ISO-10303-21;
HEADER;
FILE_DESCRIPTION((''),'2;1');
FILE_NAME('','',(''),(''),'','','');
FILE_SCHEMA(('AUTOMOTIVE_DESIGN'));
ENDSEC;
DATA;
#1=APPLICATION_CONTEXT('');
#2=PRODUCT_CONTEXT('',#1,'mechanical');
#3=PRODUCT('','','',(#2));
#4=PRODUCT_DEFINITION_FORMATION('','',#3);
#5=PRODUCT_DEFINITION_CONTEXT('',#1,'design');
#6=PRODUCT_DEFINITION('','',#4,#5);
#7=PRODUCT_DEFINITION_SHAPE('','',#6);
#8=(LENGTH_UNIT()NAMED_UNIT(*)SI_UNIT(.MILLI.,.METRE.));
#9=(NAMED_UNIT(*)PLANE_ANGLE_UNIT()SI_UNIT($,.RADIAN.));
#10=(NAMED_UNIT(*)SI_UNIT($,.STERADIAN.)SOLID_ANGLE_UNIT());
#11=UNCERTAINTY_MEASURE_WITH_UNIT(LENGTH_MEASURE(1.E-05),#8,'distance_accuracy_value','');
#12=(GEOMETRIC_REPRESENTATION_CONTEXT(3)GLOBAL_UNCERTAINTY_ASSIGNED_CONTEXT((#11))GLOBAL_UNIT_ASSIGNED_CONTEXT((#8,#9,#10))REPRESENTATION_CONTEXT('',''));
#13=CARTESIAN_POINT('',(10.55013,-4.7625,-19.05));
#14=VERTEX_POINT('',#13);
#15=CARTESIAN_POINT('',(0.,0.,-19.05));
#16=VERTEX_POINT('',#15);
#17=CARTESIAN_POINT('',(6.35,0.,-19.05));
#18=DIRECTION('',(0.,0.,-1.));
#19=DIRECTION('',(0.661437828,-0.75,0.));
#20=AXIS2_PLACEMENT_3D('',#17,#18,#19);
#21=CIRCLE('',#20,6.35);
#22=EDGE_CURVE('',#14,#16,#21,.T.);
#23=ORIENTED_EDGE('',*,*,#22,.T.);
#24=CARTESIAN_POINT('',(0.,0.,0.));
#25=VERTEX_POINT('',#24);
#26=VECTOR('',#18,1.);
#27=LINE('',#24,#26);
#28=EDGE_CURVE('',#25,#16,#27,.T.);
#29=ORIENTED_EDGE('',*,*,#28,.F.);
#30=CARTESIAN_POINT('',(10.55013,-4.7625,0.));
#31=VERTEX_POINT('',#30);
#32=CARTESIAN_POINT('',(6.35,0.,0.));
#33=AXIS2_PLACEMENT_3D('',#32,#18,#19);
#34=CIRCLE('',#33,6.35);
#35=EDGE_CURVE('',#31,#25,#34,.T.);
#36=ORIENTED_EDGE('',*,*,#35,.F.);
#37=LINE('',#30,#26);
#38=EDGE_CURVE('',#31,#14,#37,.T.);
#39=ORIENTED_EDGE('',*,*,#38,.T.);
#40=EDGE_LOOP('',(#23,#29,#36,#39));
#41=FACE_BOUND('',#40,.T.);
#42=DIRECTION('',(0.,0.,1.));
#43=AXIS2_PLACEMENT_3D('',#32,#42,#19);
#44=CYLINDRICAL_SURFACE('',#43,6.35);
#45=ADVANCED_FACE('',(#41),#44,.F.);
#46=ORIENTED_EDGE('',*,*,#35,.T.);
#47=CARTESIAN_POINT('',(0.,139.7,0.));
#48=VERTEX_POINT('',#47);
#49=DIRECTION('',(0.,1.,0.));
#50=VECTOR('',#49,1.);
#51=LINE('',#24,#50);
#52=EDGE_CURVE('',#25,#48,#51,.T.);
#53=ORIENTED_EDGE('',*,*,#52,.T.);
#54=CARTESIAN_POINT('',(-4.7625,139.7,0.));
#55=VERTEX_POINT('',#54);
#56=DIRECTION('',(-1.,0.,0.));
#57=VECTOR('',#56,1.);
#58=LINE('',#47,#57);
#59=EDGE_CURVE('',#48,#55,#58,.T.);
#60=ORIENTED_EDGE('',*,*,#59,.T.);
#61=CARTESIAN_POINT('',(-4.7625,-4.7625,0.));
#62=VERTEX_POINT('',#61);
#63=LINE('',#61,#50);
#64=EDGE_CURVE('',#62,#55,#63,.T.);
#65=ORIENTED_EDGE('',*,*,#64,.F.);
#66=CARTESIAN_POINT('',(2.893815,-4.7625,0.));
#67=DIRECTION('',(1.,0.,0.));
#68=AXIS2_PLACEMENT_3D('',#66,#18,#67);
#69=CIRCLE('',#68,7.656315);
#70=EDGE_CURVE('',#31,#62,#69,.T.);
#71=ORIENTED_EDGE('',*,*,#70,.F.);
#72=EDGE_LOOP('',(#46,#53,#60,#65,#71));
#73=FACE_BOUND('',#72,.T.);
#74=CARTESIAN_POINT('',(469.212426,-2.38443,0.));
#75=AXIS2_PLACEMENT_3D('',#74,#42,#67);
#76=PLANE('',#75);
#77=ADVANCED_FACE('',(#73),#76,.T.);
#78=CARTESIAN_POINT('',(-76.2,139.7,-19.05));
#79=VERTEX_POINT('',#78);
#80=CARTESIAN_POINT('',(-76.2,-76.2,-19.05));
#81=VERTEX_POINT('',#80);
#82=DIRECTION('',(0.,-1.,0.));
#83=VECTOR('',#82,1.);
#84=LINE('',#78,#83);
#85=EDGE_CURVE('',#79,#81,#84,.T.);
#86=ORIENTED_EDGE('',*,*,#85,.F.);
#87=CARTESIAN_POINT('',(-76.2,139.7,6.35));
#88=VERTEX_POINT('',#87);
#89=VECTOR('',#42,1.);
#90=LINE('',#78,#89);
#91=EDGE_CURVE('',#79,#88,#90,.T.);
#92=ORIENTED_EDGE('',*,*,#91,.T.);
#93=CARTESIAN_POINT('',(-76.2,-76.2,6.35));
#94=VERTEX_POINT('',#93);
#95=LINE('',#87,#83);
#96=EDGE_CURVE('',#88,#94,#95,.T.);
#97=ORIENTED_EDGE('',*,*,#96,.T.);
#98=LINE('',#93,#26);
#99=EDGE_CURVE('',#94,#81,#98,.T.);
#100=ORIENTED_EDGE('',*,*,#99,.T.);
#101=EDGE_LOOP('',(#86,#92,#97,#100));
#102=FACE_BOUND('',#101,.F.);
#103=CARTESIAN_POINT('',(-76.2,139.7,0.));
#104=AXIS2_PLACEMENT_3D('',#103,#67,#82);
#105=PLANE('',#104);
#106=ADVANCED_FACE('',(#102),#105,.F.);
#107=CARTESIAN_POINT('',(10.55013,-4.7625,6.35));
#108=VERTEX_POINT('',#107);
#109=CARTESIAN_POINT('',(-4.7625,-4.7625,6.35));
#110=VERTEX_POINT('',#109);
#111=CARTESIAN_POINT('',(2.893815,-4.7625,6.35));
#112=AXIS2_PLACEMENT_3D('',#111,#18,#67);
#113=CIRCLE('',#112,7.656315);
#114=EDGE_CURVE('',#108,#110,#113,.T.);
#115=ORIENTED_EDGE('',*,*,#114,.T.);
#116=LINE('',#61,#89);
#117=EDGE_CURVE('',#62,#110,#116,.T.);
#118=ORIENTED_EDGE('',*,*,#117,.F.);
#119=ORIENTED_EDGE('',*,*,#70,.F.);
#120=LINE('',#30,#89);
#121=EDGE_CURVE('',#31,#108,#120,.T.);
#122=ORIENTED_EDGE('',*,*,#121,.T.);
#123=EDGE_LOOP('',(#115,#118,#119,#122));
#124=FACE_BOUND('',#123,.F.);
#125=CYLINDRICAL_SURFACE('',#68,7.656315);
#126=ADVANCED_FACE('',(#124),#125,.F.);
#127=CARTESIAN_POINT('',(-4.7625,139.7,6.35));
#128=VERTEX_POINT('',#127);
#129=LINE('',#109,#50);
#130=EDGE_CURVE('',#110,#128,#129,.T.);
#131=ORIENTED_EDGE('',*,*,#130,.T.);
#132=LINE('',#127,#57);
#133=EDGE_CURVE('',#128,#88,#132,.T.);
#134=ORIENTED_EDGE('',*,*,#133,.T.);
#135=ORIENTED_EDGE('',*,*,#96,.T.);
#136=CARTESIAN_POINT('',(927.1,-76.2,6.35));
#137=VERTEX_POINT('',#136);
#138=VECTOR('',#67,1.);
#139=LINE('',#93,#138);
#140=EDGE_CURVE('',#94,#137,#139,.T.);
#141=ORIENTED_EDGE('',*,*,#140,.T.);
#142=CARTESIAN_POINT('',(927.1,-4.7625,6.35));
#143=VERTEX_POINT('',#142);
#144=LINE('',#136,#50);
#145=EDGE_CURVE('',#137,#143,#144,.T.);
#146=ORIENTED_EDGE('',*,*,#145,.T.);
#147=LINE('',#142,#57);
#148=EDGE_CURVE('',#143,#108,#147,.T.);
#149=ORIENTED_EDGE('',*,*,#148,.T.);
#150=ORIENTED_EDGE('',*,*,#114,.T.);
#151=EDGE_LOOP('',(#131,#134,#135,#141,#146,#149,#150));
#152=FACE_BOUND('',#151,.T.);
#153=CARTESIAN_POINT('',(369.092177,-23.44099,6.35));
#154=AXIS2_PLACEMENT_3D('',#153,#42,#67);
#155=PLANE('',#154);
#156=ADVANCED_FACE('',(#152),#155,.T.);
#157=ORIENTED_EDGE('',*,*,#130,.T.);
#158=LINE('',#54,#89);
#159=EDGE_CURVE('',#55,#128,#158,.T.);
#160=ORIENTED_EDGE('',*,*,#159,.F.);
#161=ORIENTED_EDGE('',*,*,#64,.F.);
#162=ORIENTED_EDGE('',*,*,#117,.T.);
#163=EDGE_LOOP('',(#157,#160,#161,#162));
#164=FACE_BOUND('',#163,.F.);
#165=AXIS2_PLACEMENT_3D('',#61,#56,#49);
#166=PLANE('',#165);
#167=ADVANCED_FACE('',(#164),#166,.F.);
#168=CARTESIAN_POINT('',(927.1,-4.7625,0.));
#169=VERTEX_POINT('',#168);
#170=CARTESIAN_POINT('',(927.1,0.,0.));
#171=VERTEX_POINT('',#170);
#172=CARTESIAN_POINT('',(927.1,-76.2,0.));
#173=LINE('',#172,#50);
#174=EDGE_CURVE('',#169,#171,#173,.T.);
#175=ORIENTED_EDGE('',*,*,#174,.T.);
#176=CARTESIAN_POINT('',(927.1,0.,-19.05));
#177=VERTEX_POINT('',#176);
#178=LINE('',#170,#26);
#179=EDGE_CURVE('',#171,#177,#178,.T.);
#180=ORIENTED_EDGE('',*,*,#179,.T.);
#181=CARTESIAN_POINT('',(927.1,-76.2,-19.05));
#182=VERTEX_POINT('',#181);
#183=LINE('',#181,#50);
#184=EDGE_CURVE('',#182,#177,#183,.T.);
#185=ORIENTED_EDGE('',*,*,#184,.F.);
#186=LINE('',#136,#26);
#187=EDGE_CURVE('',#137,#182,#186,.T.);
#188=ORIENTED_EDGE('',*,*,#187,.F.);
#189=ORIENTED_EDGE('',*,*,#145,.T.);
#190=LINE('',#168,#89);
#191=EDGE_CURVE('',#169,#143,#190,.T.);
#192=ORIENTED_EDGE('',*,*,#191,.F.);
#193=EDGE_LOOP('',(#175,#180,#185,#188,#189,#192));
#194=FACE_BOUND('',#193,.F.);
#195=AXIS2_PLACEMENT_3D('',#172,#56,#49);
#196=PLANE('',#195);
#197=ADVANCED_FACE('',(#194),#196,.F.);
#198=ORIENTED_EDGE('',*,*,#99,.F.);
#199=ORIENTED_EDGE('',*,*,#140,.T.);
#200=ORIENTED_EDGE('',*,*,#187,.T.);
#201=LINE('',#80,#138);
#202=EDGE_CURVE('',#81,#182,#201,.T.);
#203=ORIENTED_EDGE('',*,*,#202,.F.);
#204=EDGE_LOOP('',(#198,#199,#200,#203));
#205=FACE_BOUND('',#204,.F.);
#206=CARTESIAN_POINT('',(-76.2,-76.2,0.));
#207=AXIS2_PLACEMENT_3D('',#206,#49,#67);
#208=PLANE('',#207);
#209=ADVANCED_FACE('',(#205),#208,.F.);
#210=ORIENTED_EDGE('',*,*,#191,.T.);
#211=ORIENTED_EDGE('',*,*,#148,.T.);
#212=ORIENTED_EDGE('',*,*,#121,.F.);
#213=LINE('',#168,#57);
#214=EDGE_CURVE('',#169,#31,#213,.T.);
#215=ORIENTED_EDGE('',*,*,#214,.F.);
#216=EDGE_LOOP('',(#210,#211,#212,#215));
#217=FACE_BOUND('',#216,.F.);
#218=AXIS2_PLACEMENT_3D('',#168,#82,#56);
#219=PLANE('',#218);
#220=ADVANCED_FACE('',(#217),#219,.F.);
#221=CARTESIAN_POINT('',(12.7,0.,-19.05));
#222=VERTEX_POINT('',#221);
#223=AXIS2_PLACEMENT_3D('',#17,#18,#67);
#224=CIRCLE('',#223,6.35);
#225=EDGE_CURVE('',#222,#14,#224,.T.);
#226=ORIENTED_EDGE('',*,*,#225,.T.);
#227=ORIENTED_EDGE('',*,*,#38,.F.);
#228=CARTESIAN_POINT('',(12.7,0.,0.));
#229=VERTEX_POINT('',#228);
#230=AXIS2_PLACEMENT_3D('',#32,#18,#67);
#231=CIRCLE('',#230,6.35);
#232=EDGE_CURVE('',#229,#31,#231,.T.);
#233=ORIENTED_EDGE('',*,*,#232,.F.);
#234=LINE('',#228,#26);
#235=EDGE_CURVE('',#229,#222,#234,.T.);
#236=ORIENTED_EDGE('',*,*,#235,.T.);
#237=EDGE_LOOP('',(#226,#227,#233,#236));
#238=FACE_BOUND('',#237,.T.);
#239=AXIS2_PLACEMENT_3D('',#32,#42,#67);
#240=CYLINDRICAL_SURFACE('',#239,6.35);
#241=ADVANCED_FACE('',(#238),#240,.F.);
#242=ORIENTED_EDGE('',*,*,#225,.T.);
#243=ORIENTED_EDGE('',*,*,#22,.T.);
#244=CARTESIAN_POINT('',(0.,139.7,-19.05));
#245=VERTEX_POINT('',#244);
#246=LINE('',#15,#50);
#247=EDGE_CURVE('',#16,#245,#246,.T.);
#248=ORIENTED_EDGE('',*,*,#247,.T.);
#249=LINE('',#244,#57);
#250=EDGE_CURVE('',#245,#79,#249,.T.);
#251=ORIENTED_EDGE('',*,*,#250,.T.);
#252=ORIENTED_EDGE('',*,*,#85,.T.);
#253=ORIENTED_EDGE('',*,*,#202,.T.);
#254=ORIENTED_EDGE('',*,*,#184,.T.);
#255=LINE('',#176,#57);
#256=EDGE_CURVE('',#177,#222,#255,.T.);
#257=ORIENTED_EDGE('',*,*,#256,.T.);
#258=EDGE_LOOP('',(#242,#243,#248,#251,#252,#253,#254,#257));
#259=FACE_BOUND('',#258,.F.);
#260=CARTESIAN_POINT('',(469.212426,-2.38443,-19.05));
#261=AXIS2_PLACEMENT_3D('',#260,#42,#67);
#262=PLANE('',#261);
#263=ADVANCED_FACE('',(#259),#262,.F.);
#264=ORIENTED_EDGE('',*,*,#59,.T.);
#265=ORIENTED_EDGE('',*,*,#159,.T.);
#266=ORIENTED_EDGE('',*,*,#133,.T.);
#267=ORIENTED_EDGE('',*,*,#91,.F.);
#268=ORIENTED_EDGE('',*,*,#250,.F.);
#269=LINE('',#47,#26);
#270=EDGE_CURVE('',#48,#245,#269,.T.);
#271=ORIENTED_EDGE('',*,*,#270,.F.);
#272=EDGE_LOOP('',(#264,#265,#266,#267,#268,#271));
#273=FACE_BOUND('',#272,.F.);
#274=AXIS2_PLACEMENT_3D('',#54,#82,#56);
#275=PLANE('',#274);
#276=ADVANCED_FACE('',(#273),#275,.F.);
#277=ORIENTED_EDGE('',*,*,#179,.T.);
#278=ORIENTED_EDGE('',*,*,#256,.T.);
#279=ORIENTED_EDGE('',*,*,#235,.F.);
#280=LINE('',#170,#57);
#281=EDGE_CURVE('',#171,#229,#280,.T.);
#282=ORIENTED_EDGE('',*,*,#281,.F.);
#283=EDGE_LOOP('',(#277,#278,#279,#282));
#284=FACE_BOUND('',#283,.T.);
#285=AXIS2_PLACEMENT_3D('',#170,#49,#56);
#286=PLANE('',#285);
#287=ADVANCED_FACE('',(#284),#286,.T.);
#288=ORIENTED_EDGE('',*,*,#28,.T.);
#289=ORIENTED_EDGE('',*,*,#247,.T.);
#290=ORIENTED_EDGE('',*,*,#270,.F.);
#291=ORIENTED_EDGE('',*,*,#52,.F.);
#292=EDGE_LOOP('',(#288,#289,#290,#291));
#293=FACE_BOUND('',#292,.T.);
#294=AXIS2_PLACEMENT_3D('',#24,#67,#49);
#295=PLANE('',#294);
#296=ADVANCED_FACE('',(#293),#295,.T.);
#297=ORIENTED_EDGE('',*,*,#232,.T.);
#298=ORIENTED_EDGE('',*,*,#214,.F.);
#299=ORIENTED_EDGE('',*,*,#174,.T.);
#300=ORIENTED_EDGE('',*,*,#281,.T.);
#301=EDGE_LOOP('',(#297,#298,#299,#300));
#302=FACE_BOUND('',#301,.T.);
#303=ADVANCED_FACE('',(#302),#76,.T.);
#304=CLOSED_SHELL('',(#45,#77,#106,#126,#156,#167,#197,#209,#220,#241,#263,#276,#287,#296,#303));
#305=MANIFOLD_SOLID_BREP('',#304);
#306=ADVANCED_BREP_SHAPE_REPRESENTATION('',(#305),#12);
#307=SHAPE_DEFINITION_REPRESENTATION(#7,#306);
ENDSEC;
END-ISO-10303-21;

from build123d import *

# Parameters (mm, degrees)
F1_DEPTH = 19.05
F2_DEPTH = 6.35


# Not quite as in the source:
# - a length typed as a fraction of an inch, garbled in the dataset ("3 / 203.2 mm" for 3/8 in), is restored


with BuildPart() as f1:
    # F0 (on Top) → F1 (new body)
    with BuildSketch(Plane.XY):
        with BuildLine():
            Line((927.1, 0), (12.7, 0))
            ThreePointArc((12.7, 0), (12.1376302063, -2.6126302063), (10.5501302063, -4.7625))
            Line((10.5501302063, -4.7625), (927.1, -4.7625))
            Line((927.1, -4.7625), (927.1, 0))
        make_face()
        with BuildLine():
            Line((927.1, -4.7625), (10.5501302063, -4.7625))
            ThreePointArc((10.5501302063, -4.7625), (2.8938151032, -12.4188151032), (-4.7625, -4.7625))
            Line((-4.7625, -4.7625), (-4.7625, 139.7))
            Line((-4.7625, 139.7), (-76.2, 139.7))
            Line((-76.2, 139.7), (-76.2, -76.2))
            Line((-76.2, -76.2), (927.1, -76.2))
            Line((927.1, -76.2), (927.1, -4.7625))
        make_face()
        with BuildLine():
            ThreePointArc((-4.7625, -4.7625), (2.8938151032, -12.4188151032), (10.5501302063, -4.7625))
            ThreePointArc((10.5501302063, -4.7625), (3.7373697937, -5.7876302063), (0, 0))
            Line((0, 0), (0, 139.7))
            Line((0, 139.7), (-4.7625, 139.7))
            Line((-4.7625, 139.7), (-4.7625, -4.7625))
        make_face()
    extrude(amount=-F1_DEPTH)

    # F0 (on Top) → F2 (join)
    with BuildSketch(Plane.XY):
        with BuildLine():
            Line((927.1, -4.7625), (10.5501302063, -4.7625))
            ThreePointArc((10.5501302063, -4.7625), (2.8938151032, -12.4188151032), (-4.7625, -4.7625))
            Line((-4.7625, -4.7625), (-4.7625, 139.7))
            Line((-4.7625, 139.7), (-76.2, 139.7))
            Line((-76.2, 139.7), (-76.2, -76.2))
            Line((-76.2, -76.2), (927.1, -76.2))
            Line((927.1, -76.2), (927.1, -4.7625))
        make_face()
    extrude(amount=F2_DEPTH)


solid = f1.part
